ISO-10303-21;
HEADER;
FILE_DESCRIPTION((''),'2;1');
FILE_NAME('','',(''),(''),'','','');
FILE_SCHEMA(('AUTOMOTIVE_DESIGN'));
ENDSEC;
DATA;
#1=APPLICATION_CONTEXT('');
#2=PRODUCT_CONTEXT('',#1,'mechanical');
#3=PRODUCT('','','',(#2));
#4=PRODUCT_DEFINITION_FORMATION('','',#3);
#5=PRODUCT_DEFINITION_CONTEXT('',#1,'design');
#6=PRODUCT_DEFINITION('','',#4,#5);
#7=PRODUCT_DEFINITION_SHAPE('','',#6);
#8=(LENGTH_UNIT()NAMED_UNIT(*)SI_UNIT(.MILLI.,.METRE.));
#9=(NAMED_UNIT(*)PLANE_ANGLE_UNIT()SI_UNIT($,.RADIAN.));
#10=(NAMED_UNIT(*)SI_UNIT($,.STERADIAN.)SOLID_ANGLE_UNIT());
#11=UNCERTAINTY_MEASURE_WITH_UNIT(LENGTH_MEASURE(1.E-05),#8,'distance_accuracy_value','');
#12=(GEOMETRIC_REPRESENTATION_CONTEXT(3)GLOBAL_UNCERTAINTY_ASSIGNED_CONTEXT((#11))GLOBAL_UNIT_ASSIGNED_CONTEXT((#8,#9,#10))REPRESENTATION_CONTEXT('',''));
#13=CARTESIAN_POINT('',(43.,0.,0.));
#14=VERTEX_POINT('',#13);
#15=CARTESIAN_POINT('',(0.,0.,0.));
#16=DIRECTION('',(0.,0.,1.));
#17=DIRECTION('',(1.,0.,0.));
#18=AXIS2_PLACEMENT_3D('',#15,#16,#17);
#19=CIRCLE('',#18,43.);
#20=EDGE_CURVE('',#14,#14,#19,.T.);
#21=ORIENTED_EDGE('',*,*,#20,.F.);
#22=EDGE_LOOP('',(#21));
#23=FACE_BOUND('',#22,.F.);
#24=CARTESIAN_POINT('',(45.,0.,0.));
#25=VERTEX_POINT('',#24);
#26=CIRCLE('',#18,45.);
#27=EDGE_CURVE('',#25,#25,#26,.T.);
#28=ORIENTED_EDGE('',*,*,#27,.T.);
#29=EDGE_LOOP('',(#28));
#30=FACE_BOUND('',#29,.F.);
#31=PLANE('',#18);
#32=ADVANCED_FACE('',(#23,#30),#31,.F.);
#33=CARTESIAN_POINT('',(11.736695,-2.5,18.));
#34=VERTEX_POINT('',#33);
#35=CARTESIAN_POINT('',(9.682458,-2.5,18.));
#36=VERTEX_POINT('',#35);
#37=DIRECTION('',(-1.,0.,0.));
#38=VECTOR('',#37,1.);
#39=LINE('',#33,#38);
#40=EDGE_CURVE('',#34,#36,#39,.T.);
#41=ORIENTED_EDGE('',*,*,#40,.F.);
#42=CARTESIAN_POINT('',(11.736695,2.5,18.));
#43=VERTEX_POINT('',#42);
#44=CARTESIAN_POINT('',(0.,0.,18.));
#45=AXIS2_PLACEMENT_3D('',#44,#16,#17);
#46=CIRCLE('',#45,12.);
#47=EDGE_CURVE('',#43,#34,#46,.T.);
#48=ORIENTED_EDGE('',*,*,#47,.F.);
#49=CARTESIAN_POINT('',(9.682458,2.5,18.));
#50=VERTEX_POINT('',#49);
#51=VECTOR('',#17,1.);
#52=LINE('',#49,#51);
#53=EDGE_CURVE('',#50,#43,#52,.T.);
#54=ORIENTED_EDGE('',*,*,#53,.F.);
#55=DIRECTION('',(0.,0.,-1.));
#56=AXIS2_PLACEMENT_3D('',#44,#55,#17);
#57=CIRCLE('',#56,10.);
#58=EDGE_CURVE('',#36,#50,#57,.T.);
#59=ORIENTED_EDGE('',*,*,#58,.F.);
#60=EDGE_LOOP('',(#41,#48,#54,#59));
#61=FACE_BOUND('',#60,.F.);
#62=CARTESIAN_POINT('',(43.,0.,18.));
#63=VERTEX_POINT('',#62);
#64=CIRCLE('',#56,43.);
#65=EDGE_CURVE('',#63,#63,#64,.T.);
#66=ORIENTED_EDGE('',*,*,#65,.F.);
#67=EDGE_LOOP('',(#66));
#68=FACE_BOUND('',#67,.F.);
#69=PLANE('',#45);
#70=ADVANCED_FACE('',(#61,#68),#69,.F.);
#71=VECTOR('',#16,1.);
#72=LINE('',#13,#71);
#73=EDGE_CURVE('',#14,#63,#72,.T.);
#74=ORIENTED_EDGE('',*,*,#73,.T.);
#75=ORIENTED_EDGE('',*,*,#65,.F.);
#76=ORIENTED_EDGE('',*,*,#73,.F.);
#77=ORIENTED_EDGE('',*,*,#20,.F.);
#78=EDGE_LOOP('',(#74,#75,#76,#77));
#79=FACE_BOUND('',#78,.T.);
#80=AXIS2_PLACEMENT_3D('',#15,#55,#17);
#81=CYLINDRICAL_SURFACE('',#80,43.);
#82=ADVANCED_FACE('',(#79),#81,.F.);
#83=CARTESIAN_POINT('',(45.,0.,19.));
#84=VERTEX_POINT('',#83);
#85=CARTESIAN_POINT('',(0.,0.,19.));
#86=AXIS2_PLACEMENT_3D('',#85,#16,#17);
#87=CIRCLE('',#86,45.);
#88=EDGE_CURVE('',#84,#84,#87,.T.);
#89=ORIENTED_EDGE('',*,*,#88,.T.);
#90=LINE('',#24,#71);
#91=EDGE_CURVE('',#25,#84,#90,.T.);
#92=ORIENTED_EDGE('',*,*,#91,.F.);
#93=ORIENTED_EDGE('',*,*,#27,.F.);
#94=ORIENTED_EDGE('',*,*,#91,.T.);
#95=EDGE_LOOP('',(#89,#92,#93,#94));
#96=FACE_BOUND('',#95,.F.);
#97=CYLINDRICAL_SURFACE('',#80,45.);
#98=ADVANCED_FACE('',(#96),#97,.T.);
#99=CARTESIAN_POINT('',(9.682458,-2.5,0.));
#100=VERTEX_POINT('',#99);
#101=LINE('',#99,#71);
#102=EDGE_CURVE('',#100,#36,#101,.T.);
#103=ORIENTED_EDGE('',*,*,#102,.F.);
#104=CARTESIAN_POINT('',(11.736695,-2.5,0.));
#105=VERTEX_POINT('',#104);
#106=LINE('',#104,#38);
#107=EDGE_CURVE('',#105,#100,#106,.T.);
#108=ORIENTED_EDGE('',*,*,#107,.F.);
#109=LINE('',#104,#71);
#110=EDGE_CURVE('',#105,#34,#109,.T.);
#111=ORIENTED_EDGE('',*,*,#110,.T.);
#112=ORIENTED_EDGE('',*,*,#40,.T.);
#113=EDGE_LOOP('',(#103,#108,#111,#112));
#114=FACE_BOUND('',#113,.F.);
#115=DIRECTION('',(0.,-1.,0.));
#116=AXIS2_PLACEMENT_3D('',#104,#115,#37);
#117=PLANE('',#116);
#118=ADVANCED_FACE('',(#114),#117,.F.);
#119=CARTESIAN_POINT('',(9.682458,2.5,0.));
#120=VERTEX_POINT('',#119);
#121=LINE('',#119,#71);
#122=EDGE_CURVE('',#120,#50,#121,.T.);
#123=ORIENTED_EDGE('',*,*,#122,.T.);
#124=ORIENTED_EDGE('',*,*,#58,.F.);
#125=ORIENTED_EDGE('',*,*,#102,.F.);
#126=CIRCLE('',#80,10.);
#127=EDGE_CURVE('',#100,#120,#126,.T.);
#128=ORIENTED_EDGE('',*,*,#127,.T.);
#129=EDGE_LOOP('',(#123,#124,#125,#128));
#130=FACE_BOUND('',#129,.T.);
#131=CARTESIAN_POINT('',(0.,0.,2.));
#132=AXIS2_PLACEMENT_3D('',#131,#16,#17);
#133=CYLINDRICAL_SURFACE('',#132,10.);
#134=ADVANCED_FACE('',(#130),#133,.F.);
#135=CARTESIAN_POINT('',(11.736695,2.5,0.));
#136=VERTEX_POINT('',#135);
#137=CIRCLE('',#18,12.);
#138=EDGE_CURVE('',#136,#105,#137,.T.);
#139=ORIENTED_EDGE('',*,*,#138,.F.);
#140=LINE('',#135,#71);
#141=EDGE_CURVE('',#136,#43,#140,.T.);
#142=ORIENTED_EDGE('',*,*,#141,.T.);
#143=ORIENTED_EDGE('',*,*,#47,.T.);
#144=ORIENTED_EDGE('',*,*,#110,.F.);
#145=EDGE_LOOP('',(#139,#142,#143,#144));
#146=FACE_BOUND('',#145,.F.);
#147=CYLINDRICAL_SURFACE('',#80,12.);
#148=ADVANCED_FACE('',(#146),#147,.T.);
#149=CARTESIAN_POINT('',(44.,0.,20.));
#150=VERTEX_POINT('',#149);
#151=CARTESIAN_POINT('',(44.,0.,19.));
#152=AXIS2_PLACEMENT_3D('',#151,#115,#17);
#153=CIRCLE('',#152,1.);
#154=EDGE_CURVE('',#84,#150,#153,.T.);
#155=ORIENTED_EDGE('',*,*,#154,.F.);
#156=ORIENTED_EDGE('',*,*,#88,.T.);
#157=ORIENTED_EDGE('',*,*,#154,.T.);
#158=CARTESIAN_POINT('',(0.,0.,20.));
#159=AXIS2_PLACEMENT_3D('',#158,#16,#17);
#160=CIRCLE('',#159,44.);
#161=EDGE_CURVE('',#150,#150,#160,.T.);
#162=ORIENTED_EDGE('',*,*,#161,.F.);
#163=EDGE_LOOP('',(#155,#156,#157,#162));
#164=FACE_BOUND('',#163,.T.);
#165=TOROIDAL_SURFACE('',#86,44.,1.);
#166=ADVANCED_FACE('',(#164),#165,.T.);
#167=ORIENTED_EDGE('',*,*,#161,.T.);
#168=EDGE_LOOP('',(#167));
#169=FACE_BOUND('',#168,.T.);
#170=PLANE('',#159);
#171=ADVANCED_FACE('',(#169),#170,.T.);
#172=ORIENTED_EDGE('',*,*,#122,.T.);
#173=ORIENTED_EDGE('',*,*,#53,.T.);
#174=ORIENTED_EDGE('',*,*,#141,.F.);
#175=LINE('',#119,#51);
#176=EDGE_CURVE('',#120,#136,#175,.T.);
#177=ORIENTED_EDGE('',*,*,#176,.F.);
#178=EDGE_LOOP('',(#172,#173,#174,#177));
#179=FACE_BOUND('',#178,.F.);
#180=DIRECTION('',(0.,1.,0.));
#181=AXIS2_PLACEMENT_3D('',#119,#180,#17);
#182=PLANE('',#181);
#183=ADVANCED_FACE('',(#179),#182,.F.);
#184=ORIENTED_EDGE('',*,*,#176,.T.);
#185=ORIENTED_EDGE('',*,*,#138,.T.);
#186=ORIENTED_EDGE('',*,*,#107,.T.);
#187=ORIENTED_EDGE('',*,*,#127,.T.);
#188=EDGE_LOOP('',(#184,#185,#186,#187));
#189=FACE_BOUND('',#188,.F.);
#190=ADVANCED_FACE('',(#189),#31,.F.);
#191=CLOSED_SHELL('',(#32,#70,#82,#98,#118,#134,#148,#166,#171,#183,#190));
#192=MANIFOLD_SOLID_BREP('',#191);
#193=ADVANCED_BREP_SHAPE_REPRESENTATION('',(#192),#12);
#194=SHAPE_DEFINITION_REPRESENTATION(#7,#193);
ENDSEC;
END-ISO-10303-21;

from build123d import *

# Parameters (mm, degrees)
F0_R     = 45
F1_DEPTH = 20
F2_T     = -2
F3_R     = 12
F4_DEPTH = 18
F5_T     = -2
F7_DEPTH = 18
F8_R     = 1


# Not quite as in the source:
# - a shell that OpenCascade refuses in one call is made with other operations: the cavity is built on its own and cut out


with BuildPart() as f1:
    # F0 (on Top) → F1 (new body)
    with BuildSketch(Plane.XY):
        Circle(F0_R)
    extrude(amount=F1_DEPTH)

    # F2
    f2_openings = [f1.faces().sort_by_distance(p)[0] for p in [
        (0, 0, 0),
    ]]
    offset(amount=F2_T, openings=f2_openings)

    # F3 (on Top) → F4 (join, through all)
    with BuildSketch(Plane.XY):
        Circle(F3_R)
    extrude(amount=F4_DEPTH)

    # F5: a shell. OpenCascade refuses it in one call, so the cavity is built on its own and cut out:
    # the body offset inwards by the wall thickness, plus a prism from it out through each open face.
    f5_core = offset(f1.part, amount=F5_T, kind=Kind.INTERSECTION, mode=Mode.PRIVATE)
    f5_exits = [f5_core.faces().sort_by_distance(p)[0] for p in [
        (0, 0, 2),
    ]]
    add(f5_core, mode=Mode.SUBTRACT)
    extrude(f5_exits, amount=-F5_T, mode=Mode.SUBTRACT)

    # F6 (on face) → F7 (cut, through all)
    with BuildSketch(Plane(origin=(0, 0, 0), x_dir=(1, 0, 0), z_dir=(0, 0, -1))):
        with BuildLine():
            ThreePointArc((10, 0), (9.9202969627, -1.2600429248), (9.6824583655, -2.5))
            Line((9.6824583655, -2.5), (11.7366945943, -2.5))
            ThreePointArc((11.7366945943, -2.5), (11.9339921052, -1.2569138531), (12, 0))
            ThreePointArc((12, 0), (11.9339921052, 1.2569138531), (11.7366945943, 2.5))
            Line((11.7366945943, 2.5), (9.6824583655, 2.5))
            ThreePointArc((9.6824583655, 2.5), (9.9202969627, 1.2600429248), (10, 0))
        make_face()
    extrude(amount=-F7_DEPTH, mode=Mode.SUBTRACT)

    # F8
    f8_edges = [f1.edges().sort_by_distance(p)[0] for p in [
        (-45, 0, 20),
    ]]
    fillet(f8_edges, radius=F8_R)


solid = f1.part
